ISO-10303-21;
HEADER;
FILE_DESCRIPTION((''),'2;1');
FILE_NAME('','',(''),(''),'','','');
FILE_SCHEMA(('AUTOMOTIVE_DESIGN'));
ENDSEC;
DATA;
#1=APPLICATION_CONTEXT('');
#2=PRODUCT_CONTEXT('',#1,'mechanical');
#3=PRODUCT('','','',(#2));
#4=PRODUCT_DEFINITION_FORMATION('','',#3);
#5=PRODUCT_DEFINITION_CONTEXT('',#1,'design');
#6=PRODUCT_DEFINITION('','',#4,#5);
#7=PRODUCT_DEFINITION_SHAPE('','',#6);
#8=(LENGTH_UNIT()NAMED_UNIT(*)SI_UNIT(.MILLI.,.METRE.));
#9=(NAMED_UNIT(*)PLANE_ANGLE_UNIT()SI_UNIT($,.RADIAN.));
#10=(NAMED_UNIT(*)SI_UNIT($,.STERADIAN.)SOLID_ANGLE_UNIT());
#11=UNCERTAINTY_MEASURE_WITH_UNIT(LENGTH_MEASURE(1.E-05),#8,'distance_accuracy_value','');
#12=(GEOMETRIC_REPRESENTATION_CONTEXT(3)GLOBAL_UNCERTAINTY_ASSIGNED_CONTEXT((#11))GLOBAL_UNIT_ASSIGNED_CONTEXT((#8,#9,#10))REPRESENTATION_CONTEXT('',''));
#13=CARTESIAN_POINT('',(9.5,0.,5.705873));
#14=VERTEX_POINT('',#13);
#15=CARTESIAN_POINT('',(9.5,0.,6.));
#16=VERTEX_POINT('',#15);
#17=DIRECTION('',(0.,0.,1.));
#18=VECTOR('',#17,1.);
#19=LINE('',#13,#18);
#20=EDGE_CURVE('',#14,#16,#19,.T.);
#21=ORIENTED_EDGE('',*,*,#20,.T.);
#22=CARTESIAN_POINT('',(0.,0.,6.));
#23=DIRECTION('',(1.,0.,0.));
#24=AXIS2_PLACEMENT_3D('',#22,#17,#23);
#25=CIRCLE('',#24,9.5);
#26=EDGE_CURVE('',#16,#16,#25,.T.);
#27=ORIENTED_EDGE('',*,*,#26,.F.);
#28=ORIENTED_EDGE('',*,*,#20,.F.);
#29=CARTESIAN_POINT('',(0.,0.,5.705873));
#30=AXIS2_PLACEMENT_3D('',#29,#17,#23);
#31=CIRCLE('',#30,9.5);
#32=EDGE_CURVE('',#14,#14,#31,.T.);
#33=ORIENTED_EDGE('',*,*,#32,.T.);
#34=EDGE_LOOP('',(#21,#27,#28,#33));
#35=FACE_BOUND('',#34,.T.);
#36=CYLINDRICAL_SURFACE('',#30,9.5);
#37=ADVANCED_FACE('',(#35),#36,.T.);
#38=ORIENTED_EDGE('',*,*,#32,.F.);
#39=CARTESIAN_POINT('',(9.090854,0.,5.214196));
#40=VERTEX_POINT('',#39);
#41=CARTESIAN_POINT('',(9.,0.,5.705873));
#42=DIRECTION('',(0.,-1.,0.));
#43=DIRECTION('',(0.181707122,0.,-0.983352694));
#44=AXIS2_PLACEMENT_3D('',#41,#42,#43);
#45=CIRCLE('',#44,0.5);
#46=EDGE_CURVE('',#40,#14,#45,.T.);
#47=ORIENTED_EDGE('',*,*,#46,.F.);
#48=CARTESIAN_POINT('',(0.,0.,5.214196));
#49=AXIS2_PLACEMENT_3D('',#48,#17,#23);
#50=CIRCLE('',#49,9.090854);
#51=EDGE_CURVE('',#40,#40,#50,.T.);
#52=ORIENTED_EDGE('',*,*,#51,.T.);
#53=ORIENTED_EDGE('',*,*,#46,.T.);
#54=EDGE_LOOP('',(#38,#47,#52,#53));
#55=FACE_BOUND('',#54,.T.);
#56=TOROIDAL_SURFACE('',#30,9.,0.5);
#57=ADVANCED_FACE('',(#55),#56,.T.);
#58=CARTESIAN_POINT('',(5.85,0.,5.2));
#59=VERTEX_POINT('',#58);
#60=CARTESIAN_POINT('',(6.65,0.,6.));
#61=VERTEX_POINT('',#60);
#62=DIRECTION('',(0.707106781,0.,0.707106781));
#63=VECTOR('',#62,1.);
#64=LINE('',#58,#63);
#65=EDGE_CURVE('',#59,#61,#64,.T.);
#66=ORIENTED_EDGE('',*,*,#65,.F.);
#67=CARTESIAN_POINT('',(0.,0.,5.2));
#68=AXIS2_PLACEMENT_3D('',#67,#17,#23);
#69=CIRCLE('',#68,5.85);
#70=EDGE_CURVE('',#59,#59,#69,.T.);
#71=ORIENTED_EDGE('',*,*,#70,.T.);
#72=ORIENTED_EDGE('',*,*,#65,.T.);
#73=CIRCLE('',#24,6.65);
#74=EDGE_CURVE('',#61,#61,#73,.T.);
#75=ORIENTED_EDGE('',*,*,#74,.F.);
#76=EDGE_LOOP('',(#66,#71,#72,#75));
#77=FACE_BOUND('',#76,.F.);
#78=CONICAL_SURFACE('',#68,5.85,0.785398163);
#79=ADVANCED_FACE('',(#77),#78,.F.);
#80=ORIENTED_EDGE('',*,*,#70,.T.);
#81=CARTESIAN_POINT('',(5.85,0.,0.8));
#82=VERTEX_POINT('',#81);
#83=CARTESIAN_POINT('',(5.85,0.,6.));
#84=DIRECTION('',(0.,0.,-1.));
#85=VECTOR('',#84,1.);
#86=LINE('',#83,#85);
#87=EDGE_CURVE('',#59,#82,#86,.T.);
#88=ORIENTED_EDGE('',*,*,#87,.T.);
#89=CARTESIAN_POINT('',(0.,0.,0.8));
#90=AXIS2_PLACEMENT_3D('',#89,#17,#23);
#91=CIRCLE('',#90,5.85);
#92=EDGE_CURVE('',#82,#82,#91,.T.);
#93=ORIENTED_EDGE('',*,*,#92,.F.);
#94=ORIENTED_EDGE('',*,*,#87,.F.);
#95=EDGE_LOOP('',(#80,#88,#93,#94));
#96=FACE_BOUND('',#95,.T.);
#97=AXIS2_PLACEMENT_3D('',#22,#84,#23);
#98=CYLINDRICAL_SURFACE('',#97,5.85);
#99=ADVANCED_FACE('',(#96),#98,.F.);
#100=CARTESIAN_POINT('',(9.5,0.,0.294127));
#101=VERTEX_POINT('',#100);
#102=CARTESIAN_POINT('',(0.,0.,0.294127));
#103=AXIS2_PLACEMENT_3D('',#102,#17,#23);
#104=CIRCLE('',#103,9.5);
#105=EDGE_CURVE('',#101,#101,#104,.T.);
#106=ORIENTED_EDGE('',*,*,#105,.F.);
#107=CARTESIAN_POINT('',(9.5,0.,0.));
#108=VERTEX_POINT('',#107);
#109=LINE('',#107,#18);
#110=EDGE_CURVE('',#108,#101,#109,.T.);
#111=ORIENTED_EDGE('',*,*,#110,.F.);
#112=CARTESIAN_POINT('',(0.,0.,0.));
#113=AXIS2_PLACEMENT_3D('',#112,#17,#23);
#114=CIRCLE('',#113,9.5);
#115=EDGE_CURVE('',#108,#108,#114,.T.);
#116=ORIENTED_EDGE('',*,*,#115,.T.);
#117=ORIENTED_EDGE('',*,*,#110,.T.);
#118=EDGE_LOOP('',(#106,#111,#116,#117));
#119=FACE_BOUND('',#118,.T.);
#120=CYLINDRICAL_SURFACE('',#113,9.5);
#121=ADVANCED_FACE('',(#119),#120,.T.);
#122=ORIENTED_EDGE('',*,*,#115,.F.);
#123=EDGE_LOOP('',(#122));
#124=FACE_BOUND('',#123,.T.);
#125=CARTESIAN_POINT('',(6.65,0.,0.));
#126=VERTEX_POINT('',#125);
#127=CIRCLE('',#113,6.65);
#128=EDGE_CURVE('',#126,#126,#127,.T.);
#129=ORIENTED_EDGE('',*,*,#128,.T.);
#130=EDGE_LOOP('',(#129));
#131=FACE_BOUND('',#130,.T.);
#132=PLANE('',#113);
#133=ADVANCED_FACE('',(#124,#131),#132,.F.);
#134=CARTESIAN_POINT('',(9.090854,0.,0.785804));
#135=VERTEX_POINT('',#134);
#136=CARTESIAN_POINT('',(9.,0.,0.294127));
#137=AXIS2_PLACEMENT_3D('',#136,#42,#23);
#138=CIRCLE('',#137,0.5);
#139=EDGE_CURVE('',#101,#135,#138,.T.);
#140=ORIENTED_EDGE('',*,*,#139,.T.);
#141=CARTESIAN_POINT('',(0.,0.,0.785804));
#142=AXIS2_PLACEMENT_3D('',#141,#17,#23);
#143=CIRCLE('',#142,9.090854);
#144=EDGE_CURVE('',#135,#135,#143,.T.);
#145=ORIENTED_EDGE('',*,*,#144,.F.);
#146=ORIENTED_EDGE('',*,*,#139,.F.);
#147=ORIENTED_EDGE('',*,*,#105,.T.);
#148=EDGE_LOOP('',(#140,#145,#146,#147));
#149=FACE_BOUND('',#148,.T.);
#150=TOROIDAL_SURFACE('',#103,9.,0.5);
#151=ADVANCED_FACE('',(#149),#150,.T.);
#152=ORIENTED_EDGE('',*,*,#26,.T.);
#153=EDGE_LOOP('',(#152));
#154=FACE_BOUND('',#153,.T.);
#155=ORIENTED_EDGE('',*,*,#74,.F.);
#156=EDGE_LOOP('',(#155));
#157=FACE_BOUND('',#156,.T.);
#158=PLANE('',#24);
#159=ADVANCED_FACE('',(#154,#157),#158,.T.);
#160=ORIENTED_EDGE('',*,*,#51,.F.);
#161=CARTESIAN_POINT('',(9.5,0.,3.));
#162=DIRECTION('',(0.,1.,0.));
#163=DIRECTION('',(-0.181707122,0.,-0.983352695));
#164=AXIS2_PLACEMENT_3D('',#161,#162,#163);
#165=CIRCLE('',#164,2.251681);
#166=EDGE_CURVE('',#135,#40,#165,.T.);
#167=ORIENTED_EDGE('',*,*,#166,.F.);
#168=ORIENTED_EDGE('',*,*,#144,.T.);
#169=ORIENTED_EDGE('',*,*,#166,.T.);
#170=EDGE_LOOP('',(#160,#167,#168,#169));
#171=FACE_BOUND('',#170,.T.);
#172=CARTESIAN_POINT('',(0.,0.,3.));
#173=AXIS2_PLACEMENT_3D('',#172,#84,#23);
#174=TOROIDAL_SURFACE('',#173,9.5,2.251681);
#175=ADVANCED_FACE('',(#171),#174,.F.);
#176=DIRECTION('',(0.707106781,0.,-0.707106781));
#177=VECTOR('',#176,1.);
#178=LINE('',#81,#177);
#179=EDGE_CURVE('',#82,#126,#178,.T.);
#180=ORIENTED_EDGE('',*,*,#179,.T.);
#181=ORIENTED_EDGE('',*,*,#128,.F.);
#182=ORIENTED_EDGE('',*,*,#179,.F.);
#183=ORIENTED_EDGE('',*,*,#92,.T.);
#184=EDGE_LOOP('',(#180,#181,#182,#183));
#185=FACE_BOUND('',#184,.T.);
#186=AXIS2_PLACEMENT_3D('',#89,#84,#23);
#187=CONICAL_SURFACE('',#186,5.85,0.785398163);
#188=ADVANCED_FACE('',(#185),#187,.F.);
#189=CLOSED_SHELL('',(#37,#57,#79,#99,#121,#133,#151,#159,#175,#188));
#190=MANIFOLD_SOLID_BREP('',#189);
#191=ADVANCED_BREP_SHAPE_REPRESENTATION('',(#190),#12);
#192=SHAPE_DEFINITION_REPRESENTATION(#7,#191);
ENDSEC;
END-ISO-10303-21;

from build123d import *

# Parameters (mm, degrees)
F2_SIZE = 0.8


# Not quite as in the source:
# - a feature of the source that left no trace in its solid (it failed there, or was rolled back) is left out


with BuildPart() as f1:
    # F0 (on Front) → F1 (revolve)
    with BuildSketch(Plane.XZ):
        with BuildLine():
            Line((5.85, 6), (5.85, 0))
            Line((5.85, 0), (9.5, 0))
            Line((9.5, 0), (9.5, 0.294127265))
            ThreePointArc((9.5, 0.294127265), (9.3843349974, 0.6139500436), (9.090853561, 0.7858036122))
            ThreePointArc((9.090853561, 0.7858036122), (7.248319194, 3), (9.090853561, 5.2141963878))
            ThreePointArc((9.090853561, 5.2141963878), (9.3843349974, 5.3860499564), (9.5, 5.705872735))
            Line((9.5, 5.705872735), (9.5, 6))
            Line((9.5, 6), (5.85, 6))
        make_face()
    revolve(axis=Axis((0, 0, 22.371660918), (0, 0, 1)))

    # F2
    f2_edges = [f1.edges().sort_by_distance(p)[0] for p in [
        (-5.85, 0, 0),
        (-5.85, 0, 6),
    ]]
    chamfer(f2_edges, length=F2_SIZE)


solid = f1.part
